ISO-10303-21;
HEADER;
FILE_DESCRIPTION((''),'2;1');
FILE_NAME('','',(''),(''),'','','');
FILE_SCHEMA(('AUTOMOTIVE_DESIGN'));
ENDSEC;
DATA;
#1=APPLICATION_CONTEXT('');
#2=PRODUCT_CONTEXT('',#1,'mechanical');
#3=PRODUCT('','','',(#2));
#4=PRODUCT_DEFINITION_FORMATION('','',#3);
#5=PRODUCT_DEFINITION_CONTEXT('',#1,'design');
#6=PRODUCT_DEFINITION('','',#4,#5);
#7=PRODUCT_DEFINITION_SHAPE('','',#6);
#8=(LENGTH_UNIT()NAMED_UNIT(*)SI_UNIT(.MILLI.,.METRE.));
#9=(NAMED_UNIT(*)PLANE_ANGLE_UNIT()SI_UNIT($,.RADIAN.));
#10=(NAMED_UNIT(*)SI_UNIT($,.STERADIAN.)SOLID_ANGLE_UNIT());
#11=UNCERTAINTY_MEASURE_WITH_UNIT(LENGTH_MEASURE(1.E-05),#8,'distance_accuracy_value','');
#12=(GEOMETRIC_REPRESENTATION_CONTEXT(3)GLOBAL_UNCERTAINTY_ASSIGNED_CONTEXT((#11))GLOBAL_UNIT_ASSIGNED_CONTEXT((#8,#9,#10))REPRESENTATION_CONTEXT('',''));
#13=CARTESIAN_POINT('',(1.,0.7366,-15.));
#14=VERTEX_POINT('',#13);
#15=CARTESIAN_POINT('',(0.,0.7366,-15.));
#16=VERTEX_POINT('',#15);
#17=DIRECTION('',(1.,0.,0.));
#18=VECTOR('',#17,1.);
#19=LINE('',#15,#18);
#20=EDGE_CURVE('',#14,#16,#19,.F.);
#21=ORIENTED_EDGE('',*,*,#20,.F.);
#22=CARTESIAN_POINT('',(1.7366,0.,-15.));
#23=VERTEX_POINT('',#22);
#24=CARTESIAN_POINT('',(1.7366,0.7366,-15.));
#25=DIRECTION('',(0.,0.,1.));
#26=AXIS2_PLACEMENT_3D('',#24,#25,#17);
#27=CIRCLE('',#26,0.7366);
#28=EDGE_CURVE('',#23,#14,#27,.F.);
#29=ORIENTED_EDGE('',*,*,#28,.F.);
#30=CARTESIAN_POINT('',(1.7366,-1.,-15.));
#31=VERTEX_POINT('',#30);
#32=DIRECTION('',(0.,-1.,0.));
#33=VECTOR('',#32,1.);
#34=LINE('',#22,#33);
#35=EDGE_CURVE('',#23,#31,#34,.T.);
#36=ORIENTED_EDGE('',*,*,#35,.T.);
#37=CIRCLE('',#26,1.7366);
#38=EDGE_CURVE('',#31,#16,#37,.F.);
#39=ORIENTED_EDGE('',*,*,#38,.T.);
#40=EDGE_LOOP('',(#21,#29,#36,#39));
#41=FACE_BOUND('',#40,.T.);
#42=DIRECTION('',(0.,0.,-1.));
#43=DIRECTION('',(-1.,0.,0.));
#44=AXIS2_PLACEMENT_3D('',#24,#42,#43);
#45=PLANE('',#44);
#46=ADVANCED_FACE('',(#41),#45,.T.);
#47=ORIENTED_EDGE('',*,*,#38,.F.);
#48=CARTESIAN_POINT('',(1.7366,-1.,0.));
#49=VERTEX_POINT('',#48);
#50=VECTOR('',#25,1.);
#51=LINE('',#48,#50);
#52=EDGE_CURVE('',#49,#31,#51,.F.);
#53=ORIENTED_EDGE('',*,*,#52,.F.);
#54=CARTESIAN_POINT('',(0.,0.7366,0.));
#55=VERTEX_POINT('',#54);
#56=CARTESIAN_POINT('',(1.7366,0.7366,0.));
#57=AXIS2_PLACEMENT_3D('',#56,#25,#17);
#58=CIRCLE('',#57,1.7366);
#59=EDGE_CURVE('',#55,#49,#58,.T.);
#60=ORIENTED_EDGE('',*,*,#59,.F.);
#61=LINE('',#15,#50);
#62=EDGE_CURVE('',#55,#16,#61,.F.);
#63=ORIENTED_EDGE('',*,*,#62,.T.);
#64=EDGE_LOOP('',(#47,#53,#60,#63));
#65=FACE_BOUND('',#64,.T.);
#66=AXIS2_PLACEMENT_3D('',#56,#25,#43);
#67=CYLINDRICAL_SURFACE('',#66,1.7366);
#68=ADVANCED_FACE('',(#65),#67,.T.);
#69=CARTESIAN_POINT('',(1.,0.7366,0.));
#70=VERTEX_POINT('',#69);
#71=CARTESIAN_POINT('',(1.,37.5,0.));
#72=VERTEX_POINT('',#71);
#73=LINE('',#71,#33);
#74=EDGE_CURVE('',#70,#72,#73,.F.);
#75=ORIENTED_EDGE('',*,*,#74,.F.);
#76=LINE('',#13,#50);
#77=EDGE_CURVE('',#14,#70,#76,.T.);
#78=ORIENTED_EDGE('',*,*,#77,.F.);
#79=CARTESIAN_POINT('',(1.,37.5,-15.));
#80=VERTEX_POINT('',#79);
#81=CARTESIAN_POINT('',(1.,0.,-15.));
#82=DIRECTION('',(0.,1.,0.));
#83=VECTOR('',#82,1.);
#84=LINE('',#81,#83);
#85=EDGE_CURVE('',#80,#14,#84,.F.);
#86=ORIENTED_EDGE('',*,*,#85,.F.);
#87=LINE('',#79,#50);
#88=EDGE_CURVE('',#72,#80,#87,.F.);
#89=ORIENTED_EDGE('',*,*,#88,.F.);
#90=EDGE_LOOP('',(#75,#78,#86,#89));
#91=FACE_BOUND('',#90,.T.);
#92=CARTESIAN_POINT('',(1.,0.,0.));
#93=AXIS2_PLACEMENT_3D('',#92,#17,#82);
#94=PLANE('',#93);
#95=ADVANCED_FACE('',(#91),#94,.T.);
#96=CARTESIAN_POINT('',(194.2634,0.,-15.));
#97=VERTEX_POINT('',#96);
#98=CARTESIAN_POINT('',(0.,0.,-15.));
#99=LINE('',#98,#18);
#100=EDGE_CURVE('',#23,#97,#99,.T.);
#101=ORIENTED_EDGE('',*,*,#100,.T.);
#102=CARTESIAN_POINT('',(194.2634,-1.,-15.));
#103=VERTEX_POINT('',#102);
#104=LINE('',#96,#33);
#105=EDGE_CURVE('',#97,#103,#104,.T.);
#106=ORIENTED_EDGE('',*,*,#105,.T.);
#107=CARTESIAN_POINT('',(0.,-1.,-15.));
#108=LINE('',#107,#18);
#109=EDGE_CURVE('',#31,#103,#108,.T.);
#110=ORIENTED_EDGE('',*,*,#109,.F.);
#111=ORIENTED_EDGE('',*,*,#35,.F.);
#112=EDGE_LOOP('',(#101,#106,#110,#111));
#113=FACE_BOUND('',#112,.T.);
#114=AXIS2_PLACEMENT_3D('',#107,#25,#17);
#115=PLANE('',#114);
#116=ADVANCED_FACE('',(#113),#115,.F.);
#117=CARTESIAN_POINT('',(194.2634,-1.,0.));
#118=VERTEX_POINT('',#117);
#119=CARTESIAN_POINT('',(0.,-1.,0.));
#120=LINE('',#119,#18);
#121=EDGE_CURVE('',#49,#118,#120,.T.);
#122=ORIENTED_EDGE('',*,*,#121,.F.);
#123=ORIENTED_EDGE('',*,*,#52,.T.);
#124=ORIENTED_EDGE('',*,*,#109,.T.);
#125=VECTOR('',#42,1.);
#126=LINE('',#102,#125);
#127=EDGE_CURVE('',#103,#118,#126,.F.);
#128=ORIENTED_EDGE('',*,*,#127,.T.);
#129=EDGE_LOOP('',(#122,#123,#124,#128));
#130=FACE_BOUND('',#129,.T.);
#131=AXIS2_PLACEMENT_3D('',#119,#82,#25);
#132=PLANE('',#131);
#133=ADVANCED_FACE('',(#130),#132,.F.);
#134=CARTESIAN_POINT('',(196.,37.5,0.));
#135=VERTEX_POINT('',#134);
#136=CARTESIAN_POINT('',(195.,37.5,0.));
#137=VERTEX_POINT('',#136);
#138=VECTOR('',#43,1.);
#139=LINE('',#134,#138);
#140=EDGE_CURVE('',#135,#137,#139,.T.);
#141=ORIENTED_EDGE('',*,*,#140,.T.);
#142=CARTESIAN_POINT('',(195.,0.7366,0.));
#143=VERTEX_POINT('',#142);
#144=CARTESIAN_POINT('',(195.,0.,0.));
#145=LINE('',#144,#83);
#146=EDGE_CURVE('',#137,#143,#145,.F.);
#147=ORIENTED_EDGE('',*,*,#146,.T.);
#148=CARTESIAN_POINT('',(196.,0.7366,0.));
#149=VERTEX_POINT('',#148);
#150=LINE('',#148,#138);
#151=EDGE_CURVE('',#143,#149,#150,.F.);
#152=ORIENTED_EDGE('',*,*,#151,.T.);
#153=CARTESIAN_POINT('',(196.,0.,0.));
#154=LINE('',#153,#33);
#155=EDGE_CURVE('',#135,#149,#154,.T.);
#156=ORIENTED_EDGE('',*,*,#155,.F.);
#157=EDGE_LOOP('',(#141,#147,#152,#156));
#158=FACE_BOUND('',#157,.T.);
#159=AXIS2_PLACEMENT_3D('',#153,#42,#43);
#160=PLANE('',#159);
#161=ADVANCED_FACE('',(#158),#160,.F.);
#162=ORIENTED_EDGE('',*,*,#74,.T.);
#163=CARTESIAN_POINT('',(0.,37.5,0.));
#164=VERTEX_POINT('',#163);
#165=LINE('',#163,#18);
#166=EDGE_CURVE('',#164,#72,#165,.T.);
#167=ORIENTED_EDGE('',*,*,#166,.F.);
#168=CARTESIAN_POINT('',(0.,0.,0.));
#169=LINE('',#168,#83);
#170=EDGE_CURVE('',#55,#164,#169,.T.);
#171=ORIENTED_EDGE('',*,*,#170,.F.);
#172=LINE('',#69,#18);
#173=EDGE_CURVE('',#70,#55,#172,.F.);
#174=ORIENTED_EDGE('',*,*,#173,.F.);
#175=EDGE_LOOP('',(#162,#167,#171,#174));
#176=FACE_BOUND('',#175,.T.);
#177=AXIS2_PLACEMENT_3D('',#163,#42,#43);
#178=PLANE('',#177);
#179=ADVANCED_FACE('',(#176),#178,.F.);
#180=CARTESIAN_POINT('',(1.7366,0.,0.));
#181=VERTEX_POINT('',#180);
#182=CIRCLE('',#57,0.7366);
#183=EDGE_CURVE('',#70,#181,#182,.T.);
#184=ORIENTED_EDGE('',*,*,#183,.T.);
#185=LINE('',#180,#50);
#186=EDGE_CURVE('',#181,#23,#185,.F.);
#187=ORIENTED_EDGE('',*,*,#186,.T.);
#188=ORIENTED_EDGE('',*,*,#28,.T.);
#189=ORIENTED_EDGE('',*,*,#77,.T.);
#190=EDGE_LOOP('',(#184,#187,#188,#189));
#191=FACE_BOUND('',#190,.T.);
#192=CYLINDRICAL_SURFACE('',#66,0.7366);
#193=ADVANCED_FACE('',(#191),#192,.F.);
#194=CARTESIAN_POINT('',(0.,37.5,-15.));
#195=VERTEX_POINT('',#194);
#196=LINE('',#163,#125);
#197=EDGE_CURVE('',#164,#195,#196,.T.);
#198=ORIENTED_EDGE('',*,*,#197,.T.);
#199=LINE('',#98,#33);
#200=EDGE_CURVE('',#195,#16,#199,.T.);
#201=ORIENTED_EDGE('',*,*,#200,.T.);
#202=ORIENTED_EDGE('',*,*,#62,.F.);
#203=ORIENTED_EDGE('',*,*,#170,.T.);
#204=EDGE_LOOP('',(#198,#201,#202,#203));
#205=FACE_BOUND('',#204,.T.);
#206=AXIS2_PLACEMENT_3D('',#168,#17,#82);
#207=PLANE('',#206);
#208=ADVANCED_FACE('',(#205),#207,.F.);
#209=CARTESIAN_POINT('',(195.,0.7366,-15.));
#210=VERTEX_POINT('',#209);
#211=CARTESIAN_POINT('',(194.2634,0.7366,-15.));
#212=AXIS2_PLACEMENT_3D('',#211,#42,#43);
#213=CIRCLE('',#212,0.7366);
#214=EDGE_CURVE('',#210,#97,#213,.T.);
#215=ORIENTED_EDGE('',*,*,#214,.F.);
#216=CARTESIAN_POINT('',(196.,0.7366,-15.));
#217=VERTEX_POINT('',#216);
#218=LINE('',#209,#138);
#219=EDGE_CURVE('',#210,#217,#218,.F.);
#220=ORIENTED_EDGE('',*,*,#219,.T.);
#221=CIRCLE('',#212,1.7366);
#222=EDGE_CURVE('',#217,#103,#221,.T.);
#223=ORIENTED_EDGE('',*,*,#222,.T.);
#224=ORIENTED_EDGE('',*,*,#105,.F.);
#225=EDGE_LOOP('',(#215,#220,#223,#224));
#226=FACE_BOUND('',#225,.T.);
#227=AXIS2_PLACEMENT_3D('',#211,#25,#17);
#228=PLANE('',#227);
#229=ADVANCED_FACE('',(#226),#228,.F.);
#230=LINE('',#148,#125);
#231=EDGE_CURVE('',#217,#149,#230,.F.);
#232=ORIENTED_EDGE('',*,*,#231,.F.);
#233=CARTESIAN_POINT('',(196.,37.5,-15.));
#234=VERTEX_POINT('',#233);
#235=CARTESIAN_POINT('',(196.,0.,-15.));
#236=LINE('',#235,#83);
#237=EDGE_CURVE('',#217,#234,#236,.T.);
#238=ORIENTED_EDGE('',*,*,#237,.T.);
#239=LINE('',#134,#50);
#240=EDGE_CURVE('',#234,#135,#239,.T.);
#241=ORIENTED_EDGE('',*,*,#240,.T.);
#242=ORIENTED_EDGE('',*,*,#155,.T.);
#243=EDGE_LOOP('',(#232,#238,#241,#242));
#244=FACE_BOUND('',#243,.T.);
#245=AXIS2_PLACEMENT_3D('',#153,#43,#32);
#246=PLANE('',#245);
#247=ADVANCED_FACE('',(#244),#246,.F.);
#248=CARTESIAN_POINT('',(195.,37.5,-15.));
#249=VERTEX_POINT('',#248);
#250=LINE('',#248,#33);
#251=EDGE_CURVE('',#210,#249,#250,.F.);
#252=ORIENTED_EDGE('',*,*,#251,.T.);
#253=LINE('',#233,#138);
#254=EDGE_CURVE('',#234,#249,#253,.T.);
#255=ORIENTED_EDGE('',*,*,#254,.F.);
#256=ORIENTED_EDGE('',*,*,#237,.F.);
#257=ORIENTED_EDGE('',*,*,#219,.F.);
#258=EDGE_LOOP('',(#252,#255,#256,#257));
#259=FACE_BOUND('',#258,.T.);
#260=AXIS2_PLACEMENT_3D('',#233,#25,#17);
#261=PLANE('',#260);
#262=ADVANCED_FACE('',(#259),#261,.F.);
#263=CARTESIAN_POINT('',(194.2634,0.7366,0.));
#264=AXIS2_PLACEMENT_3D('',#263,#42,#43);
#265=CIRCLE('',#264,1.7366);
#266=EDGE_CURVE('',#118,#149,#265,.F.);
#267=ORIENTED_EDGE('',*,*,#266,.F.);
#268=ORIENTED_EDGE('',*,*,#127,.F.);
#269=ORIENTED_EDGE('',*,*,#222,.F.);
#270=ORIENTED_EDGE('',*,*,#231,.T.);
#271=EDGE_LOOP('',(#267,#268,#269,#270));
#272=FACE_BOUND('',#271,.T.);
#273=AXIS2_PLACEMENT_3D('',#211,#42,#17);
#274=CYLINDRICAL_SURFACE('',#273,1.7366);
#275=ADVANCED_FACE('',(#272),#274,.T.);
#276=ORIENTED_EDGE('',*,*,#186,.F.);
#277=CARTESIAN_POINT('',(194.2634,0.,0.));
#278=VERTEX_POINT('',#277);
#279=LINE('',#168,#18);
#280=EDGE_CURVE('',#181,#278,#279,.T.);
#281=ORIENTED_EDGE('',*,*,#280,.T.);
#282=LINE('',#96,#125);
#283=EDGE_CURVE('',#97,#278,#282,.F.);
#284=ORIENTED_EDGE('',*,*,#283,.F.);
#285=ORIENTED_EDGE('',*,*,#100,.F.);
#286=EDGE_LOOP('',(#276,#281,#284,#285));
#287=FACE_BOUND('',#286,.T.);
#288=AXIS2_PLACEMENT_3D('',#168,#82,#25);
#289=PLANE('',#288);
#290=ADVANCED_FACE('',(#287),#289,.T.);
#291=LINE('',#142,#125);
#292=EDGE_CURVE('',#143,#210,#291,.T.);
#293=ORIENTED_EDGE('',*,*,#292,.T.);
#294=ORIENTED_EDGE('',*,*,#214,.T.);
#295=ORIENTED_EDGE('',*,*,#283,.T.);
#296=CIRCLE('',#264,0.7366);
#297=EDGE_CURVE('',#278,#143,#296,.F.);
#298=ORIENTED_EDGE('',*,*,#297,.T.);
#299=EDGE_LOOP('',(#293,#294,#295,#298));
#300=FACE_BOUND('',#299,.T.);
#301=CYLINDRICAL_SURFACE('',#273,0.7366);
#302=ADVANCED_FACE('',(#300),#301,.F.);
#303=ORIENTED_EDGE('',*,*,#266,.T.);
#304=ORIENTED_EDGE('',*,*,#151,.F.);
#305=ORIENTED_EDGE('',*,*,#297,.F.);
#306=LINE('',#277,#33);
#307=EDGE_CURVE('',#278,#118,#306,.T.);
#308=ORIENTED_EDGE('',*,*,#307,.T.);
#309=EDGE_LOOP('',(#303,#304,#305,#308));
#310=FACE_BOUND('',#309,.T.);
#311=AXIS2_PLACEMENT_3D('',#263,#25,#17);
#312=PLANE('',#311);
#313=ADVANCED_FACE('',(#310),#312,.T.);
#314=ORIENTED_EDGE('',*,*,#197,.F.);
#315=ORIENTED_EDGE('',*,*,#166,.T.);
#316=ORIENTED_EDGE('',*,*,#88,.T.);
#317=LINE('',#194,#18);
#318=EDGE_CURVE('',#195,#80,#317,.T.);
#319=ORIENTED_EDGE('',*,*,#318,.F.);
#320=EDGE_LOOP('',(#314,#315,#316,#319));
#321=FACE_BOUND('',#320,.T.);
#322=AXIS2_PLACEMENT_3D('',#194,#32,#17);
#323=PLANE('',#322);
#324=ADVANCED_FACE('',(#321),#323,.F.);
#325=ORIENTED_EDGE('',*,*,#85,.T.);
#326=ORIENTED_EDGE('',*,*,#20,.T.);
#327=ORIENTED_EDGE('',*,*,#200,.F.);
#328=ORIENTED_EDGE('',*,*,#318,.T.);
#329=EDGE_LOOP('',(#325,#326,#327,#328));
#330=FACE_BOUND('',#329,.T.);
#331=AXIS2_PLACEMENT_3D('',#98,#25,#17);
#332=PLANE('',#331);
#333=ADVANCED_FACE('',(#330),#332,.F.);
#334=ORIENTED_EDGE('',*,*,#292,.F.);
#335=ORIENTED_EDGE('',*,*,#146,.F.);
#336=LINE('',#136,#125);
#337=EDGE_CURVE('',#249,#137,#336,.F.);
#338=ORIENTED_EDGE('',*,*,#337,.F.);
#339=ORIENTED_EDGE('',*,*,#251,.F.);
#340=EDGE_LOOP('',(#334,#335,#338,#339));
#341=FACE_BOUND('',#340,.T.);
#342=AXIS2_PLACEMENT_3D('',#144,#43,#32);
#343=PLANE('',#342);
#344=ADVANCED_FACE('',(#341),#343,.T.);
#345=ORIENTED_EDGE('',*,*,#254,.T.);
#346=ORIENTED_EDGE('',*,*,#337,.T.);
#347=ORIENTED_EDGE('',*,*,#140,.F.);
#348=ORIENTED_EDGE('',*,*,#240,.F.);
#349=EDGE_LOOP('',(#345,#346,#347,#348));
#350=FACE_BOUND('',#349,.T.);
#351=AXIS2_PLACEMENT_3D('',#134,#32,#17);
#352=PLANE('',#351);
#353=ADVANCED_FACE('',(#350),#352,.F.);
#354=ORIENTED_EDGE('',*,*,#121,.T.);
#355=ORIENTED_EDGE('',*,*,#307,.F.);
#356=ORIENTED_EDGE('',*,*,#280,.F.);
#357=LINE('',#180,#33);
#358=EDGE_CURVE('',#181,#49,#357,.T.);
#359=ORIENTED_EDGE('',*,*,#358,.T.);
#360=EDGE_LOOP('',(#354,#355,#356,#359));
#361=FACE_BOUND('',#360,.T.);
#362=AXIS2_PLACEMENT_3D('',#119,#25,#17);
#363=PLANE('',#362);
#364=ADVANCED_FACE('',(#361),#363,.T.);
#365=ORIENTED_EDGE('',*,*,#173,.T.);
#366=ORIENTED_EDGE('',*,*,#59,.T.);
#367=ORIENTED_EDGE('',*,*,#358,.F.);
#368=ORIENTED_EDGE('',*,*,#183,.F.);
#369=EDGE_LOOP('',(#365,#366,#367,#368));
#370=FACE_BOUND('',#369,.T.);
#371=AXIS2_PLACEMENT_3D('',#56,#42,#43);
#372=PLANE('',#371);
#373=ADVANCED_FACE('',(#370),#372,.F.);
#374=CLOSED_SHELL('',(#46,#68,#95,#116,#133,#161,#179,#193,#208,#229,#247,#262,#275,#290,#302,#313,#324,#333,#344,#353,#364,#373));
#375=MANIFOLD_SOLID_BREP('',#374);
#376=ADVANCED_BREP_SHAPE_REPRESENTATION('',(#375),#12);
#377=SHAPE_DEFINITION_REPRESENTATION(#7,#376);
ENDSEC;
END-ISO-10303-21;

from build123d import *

# Parameters (mm, degrees)
SKETCH_1_W                       = 196
SKETCH_1_H                       = 15
SM_BASE_FLANGE_1_DEPTH           = 1
SM_EDGE_FLANGE_1_STRIP_W         = 5.4732
SM_EDGE_FLANGE_1_STRIP_H         = 1
SM_EDGE_FLANGE_1_STRIP_CUT_DEPTH = 15
SM_EDGE_FLANGE_1_DEPTH           = 15
SM_EDGE_FLANGE_2_STRIP_W         = 5.4732
SM_EDGE_FLANGE_2_STRIP_H         = 1
SM_EDGE_FLANGE_2_STRIP_CUT_DEPTH = 15
SM_EDGE_FLANGE_2_DEPTH           = 15


# Sheet-metal steps are written as plain solids
with BuildPart() as part:
    # Sketch 1 → Базовая кромка1 (new body)
    with BuildSketch(Plane(origin=(0, 0, 0), x_dir=(1, 0, 0), z_dir=(0, 1, 0))):
        with Locations((98, 7.5)):
            Rectangle(SKETCH_1_W, SKETCH_1_H)
    extrude(amount=-SM_BASE_FLANGE_1_DEPTH)

    # Ребро-кромка1 strip (across the edge) → Ребро-кромка1 strip cut (cut)
    with BuildSketch(Plane.XY.offset(-15)):
        with Locations((-1, -0.5)):
            Rectangle(SM_EDGE_FLANGE_1_STRIP_W, SM_EDGE_FLANGE_1_STRIP_H)
    extrude(amount=SM_EDGE_FLANGE_1_STRIP_CUT_DEPTH, mode=Mode.SUBTRACT)

    # Ребро-кромка1 section (across the edge) → Ребро-кромка1 (add)
    with BuildSketch(Plane.XY.offset(-15)):
        with BuildLine():
            Line((0, 0.7366), (0, 37.5))
            Line((0, 37.5), (1, 37.5))
            Line((1, 37.5), (1, 0.7366))
            ThreePointArc((1, 0.7366), (1.215745145, 0.215745145), (1.7366, 0))
            Line((1.7366, 0), (1.7366, -1))
            ThreePointArc((1.7366, -1), (0.508638364, -0.491361636), (0, 0.7366))
        make_face()
    extrude(amount=SM_EDGE_FLANGE_1_DEPTH)

    # Ребро-кромка2 strip (across the edge) → Ребро-кромка2 strip cut (cut)
    with BuildSketch(Plane(origin=(196, 0, 0), x_dir=(-1, 0, 0), z_dir=(0, 0, -1))):
        with Locations((-1, -0.5)):
            Rectangle(SM_EDGE_FLANGE_2_STRIP_W, SM_EDGE_FLANGE_2_STRIP_H)
    extrude(amount=SM_EDGE_FLANGE_2_STRIP_CUT_DEPTH, mode=Mode.SUBTRACT)

    # Ребро-кромка2 section (across the edge) → Ребро-кромка2 (add)
    with BuildSketch(Plane(origin=(196, 0, 0), x_dir=(-1, 0, 0), z_dir=(0, 0, -1))):
        with BuildLine():
            Line((0, 0.7366), (0, 37.5))
            Line((0, 37.5), (1, 37.5))
            Line((1, 37.5), (1, 0.7366))
            ThreePointArc((1, 0.7366), (1.215745145, 0.215745145), (1.7366, 0))
            Line((1.7366, 0), (1.7366, -1))
            ThreePointArc((1.7366, -1), (0.508638364, -0.491361636), (0, 0.7366))
        make_face()
    extrude(amount=SM_EDGE_FLANGE_2_DEPTH)


solid = part.part
